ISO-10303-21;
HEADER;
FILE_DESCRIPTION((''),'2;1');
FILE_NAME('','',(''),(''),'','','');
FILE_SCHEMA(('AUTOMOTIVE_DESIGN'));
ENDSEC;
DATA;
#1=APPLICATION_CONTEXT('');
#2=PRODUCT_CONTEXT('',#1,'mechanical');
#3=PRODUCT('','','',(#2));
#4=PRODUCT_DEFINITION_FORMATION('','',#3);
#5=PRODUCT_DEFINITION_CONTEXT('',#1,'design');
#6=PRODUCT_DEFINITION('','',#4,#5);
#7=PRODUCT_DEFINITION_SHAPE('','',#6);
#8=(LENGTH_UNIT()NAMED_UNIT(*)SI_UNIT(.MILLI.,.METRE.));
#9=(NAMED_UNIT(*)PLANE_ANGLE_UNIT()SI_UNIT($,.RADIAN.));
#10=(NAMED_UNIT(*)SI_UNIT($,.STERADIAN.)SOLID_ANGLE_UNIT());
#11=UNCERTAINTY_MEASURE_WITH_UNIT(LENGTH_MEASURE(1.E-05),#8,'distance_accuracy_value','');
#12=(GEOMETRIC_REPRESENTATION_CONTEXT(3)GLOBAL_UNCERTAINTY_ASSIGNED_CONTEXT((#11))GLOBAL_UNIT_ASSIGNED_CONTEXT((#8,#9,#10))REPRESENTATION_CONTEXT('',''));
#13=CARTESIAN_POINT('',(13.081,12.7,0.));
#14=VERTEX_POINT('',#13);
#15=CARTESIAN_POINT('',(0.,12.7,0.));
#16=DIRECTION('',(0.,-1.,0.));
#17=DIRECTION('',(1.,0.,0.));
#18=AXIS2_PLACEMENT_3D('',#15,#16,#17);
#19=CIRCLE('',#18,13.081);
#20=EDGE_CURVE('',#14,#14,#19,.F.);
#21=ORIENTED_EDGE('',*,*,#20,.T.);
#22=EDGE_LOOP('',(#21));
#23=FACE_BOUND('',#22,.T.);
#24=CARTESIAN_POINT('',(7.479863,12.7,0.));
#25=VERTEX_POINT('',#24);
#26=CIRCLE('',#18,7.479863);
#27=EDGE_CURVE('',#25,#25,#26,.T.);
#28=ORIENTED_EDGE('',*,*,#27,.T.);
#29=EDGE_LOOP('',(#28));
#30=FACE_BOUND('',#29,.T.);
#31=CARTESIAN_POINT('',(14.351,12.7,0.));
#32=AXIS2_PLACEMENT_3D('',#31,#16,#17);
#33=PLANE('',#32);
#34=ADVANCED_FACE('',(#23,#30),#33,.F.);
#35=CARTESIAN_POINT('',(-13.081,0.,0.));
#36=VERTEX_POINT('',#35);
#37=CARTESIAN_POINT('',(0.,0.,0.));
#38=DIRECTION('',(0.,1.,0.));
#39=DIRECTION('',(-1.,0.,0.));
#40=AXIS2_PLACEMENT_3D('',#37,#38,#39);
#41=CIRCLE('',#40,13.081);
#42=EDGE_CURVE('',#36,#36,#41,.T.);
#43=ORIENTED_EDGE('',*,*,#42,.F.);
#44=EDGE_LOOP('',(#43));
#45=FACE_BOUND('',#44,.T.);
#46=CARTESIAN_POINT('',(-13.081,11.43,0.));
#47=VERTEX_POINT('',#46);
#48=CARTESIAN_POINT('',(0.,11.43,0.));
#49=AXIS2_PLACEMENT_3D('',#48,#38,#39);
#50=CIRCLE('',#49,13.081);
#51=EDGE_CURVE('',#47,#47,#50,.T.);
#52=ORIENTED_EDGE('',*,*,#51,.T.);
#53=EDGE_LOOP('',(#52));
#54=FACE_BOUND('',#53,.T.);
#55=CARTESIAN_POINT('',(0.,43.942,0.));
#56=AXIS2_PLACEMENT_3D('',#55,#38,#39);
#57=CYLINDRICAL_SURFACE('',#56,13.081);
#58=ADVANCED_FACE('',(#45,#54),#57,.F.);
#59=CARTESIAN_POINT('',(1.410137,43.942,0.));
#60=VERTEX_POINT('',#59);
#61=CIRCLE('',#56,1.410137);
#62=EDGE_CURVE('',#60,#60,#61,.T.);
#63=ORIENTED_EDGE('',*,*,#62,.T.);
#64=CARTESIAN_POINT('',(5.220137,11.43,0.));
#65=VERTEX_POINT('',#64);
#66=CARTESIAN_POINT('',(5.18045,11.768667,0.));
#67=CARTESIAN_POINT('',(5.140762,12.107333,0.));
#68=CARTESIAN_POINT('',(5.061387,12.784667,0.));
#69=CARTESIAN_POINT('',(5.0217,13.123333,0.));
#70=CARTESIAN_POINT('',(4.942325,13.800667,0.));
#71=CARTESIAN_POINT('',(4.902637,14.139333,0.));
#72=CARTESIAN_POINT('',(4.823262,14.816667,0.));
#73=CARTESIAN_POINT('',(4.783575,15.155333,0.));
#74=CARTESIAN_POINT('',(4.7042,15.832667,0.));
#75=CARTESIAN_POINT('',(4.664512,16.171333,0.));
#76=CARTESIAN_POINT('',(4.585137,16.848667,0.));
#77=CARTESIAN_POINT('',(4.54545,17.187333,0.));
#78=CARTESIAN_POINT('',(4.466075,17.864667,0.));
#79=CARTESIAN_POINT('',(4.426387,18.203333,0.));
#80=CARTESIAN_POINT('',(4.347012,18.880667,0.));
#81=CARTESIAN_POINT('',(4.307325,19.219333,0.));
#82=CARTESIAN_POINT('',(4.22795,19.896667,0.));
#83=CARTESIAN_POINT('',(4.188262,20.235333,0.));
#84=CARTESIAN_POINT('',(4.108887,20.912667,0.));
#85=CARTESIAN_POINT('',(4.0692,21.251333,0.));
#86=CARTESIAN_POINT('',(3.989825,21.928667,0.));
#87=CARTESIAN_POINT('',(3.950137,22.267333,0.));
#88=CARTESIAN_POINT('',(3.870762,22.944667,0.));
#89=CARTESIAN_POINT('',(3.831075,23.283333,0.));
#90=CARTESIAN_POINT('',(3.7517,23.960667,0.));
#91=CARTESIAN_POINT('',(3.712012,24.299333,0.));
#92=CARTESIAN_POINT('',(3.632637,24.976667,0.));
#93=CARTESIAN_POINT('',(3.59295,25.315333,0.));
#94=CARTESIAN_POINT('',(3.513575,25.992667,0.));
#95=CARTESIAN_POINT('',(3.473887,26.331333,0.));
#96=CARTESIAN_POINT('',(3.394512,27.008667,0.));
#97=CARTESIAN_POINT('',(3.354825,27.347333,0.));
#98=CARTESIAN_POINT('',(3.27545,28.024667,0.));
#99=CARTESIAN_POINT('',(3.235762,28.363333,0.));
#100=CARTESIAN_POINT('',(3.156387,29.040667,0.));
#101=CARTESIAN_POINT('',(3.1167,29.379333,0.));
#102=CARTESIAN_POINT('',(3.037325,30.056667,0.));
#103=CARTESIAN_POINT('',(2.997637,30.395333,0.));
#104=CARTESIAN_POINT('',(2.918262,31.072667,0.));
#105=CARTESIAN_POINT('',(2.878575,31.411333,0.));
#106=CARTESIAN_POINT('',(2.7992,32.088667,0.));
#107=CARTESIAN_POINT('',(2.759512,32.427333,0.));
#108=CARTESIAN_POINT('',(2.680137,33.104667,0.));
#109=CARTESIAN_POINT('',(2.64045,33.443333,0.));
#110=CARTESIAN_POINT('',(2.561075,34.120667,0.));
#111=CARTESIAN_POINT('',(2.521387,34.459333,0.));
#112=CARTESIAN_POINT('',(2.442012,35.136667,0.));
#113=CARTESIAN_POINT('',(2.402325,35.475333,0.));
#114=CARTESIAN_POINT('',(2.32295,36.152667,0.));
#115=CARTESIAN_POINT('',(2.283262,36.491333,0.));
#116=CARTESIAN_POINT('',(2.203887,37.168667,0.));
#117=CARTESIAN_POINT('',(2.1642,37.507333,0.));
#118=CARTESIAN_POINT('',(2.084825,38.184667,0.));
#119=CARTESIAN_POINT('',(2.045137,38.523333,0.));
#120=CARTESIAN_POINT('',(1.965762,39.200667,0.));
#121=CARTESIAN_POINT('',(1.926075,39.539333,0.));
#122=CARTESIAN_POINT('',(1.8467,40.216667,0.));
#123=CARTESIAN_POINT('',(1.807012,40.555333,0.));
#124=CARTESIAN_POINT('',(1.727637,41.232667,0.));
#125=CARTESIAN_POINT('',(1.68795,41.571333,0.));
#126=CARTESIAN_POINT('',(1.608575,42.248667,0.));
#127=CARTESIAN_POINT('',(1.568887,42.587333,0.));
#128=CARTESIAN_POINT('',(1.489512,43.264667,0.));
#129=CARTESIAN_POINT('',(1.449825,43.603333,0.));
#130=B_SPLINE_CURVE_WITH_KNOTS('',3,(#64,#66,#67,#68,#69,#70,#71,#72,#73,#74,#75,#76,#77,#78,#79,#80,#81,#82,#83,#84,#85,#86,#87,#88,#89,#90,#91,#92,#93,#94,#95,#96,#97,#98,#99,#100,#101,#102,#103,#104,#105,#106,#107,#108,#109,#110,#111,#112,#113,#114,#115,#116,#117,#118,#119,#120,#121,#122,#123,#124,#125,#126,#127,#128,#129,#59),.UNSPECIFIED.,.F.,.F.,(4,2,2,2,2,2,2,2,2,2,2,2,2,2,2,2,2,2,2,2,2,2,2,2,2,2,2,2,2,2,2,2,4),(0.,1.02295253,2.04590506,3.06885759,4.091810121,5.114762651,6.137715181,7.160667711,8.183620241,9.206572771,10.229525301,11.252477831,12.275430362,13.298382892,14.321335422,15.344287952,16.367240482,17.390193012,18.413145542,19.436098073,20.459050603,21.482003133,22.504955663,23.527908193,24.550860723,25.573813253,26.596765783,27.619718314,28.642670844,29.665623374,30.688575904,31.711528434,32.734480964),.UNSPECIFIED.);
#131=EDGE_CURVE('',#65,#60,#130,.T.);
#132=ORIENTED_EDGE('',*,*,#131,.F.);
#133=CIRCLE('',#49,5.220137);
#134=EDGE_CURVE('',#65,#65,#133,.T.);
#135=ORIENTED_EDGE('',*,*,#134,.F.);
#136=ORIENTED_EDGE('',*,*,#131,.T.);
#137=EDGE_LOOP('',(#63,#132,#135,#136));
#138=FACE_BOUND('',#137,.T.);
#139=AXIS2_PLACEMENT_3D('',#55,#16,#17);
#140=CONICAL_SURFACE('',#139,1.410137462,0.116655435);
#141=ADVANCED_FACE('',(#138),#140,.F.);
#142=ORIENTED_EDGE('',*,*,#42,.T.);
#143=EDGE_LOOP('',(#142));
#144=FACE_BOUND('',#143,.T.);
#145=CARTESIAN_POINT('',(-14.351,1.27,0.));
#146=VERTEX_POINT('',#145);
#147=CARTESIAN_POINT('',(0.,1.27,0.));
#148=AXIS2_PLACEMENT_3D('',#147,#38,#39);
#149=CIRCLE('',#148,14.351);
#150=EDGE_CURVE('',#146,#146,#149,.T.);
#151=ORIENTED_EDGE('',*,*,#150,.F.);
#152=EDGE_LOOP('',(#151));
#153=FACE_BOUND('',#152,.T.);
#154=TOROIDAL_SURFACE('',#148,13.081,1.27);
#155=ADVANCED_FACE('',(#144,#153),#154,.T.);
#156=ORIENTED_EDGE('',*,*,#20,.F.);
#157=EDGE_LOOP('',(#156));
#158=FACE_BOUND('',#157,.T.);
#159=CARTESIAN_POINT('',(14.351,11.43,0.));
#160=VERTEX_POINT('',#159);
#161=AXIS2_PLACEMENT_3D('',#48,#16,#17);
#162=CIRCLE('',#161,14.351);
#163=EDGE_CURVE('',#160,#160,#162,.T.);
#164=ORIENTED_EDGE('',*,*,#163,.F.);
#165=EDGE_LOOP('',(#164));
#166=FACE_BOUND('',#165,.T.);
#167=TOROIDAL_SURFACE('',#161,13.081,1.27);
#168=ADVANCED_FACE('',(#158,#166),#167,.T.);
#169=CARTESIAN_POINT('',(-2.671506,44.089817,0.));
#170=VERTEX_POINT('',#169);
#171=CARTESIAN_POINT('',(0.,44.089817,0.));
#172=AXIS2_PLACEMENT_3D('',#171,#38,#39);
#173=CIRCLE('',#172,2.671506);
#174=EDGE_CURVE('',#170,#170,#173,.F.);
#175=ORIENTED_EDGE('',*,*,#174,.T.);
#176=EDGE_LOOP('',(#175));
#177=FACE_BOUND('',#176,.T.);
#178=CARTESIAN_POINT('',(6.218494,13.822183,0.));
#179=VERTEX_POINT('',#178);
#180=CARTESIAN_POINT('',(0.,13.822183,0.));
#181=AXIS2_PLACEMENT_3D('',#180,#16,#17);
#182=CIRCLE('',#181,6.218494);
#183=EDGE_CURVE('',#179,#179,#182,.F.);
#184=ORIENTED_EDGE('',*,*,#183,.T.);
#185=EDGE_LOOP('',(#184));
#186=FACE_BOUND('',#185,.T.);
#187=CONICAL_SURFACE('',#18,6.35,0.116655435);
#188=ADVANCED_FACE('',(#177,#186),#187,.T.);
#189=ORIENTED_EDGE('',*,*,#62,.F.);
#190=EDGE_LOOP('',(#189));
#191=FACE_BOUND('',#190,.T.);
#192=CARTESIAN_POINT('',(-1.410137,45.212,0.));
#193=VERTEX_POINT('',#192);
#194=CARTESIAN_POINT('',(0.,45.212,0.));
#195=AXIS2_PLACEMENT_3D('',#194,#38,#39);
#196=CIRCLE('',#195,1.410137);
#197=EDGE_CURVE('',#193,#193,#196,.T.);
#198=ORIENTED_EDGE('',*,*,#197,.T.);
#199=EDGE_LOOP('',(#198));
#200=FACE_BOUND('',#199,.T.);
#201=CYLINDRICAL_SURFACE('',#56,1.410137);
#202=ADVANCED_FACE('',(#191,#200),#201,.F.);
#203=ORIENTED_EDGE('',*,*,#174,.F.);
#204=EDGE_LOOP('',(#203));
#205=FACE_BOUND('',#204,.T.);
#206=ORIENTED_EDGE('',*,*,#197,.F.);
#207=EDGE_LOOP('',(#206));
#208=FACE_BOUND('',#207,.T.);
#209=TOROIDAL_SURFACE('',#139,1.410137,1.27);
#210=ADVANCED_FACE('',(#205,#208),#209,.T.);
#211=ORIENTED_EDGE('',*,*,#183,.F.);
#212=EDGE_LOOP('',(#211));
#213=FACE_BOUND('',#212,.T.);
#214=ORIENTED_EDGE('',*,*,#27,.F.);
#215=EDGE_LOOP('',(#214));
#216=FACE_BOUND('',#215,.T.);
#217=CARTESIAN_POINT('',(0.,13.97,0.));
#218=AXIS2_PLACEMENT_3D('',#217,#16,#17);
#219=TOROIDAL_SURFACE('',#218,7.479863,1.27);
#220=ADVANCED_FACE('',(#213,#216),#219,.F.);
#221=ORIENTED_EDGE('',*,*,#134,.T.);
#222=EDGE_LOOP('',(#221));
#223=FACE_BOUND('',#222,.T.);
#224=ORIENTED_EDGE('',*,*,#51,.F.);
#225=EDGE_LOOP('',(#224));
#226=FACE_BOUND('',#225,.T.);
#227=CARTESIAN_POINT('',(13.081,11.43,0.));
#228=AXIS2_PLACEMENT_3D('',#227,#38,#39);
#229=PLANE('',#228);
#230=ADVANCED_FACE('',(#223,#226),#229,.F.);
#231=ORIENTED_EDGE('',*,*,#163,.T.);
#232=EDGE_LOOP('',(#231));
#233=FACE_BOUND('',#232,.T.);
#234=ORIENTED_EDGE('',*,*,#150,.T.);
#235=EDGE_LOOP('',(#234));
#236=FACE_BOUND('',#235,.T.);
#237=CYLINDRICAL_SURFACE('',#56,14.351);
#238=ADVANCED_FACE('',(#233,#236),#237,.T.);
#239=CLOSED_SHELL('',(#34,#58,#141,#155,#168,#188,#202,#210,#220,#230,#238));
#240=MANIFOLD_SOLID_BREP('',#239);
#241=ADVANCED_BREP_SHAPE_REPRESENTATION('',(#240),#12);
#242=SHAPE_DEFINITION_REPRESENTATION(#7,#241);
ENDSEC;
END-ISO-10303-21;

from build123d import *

# Parameters (mm, degrees)
FILLET1_R = 1.27


with BuildPart() as part:
    # Sketch1 → Revolve1 (revolve)
    with BuildSketch(Plane.XY, mode=Mode.PRIVATE) as revolve1_sk:
        Polygon((13.081, 0), (14.351, 0), (14.351, 12.7), (6.35, 12.7), (2.54, 45.212), (1.410137462, 45.212), (1.410137462, 43.942), (5.220137462, 11.43), (13.081, 11.43), (13.081, 1.27), align=None)
    revolve(revolve1_sk.sketch.rotate(Axis((0, 43.942, 0), (0, -1, 0)), 180), axis=Axis((0, 43.942, 0), (0, -1, 0)))

    # Fillet1
    fillet1_edges = [part.edges().sort_by_distance(p)[0] for p in [
        (2.54, 45.212, 0),
        (6.35, 12.7, 0),
        (14.351, 12.7, 0),
        (14.351, 0, 0),
    ]]
    fillet(fillet1_edges, radius=FILLET1_R - 0.0001)  # a hair under: the kernel refuses the full size


solid = part.part
